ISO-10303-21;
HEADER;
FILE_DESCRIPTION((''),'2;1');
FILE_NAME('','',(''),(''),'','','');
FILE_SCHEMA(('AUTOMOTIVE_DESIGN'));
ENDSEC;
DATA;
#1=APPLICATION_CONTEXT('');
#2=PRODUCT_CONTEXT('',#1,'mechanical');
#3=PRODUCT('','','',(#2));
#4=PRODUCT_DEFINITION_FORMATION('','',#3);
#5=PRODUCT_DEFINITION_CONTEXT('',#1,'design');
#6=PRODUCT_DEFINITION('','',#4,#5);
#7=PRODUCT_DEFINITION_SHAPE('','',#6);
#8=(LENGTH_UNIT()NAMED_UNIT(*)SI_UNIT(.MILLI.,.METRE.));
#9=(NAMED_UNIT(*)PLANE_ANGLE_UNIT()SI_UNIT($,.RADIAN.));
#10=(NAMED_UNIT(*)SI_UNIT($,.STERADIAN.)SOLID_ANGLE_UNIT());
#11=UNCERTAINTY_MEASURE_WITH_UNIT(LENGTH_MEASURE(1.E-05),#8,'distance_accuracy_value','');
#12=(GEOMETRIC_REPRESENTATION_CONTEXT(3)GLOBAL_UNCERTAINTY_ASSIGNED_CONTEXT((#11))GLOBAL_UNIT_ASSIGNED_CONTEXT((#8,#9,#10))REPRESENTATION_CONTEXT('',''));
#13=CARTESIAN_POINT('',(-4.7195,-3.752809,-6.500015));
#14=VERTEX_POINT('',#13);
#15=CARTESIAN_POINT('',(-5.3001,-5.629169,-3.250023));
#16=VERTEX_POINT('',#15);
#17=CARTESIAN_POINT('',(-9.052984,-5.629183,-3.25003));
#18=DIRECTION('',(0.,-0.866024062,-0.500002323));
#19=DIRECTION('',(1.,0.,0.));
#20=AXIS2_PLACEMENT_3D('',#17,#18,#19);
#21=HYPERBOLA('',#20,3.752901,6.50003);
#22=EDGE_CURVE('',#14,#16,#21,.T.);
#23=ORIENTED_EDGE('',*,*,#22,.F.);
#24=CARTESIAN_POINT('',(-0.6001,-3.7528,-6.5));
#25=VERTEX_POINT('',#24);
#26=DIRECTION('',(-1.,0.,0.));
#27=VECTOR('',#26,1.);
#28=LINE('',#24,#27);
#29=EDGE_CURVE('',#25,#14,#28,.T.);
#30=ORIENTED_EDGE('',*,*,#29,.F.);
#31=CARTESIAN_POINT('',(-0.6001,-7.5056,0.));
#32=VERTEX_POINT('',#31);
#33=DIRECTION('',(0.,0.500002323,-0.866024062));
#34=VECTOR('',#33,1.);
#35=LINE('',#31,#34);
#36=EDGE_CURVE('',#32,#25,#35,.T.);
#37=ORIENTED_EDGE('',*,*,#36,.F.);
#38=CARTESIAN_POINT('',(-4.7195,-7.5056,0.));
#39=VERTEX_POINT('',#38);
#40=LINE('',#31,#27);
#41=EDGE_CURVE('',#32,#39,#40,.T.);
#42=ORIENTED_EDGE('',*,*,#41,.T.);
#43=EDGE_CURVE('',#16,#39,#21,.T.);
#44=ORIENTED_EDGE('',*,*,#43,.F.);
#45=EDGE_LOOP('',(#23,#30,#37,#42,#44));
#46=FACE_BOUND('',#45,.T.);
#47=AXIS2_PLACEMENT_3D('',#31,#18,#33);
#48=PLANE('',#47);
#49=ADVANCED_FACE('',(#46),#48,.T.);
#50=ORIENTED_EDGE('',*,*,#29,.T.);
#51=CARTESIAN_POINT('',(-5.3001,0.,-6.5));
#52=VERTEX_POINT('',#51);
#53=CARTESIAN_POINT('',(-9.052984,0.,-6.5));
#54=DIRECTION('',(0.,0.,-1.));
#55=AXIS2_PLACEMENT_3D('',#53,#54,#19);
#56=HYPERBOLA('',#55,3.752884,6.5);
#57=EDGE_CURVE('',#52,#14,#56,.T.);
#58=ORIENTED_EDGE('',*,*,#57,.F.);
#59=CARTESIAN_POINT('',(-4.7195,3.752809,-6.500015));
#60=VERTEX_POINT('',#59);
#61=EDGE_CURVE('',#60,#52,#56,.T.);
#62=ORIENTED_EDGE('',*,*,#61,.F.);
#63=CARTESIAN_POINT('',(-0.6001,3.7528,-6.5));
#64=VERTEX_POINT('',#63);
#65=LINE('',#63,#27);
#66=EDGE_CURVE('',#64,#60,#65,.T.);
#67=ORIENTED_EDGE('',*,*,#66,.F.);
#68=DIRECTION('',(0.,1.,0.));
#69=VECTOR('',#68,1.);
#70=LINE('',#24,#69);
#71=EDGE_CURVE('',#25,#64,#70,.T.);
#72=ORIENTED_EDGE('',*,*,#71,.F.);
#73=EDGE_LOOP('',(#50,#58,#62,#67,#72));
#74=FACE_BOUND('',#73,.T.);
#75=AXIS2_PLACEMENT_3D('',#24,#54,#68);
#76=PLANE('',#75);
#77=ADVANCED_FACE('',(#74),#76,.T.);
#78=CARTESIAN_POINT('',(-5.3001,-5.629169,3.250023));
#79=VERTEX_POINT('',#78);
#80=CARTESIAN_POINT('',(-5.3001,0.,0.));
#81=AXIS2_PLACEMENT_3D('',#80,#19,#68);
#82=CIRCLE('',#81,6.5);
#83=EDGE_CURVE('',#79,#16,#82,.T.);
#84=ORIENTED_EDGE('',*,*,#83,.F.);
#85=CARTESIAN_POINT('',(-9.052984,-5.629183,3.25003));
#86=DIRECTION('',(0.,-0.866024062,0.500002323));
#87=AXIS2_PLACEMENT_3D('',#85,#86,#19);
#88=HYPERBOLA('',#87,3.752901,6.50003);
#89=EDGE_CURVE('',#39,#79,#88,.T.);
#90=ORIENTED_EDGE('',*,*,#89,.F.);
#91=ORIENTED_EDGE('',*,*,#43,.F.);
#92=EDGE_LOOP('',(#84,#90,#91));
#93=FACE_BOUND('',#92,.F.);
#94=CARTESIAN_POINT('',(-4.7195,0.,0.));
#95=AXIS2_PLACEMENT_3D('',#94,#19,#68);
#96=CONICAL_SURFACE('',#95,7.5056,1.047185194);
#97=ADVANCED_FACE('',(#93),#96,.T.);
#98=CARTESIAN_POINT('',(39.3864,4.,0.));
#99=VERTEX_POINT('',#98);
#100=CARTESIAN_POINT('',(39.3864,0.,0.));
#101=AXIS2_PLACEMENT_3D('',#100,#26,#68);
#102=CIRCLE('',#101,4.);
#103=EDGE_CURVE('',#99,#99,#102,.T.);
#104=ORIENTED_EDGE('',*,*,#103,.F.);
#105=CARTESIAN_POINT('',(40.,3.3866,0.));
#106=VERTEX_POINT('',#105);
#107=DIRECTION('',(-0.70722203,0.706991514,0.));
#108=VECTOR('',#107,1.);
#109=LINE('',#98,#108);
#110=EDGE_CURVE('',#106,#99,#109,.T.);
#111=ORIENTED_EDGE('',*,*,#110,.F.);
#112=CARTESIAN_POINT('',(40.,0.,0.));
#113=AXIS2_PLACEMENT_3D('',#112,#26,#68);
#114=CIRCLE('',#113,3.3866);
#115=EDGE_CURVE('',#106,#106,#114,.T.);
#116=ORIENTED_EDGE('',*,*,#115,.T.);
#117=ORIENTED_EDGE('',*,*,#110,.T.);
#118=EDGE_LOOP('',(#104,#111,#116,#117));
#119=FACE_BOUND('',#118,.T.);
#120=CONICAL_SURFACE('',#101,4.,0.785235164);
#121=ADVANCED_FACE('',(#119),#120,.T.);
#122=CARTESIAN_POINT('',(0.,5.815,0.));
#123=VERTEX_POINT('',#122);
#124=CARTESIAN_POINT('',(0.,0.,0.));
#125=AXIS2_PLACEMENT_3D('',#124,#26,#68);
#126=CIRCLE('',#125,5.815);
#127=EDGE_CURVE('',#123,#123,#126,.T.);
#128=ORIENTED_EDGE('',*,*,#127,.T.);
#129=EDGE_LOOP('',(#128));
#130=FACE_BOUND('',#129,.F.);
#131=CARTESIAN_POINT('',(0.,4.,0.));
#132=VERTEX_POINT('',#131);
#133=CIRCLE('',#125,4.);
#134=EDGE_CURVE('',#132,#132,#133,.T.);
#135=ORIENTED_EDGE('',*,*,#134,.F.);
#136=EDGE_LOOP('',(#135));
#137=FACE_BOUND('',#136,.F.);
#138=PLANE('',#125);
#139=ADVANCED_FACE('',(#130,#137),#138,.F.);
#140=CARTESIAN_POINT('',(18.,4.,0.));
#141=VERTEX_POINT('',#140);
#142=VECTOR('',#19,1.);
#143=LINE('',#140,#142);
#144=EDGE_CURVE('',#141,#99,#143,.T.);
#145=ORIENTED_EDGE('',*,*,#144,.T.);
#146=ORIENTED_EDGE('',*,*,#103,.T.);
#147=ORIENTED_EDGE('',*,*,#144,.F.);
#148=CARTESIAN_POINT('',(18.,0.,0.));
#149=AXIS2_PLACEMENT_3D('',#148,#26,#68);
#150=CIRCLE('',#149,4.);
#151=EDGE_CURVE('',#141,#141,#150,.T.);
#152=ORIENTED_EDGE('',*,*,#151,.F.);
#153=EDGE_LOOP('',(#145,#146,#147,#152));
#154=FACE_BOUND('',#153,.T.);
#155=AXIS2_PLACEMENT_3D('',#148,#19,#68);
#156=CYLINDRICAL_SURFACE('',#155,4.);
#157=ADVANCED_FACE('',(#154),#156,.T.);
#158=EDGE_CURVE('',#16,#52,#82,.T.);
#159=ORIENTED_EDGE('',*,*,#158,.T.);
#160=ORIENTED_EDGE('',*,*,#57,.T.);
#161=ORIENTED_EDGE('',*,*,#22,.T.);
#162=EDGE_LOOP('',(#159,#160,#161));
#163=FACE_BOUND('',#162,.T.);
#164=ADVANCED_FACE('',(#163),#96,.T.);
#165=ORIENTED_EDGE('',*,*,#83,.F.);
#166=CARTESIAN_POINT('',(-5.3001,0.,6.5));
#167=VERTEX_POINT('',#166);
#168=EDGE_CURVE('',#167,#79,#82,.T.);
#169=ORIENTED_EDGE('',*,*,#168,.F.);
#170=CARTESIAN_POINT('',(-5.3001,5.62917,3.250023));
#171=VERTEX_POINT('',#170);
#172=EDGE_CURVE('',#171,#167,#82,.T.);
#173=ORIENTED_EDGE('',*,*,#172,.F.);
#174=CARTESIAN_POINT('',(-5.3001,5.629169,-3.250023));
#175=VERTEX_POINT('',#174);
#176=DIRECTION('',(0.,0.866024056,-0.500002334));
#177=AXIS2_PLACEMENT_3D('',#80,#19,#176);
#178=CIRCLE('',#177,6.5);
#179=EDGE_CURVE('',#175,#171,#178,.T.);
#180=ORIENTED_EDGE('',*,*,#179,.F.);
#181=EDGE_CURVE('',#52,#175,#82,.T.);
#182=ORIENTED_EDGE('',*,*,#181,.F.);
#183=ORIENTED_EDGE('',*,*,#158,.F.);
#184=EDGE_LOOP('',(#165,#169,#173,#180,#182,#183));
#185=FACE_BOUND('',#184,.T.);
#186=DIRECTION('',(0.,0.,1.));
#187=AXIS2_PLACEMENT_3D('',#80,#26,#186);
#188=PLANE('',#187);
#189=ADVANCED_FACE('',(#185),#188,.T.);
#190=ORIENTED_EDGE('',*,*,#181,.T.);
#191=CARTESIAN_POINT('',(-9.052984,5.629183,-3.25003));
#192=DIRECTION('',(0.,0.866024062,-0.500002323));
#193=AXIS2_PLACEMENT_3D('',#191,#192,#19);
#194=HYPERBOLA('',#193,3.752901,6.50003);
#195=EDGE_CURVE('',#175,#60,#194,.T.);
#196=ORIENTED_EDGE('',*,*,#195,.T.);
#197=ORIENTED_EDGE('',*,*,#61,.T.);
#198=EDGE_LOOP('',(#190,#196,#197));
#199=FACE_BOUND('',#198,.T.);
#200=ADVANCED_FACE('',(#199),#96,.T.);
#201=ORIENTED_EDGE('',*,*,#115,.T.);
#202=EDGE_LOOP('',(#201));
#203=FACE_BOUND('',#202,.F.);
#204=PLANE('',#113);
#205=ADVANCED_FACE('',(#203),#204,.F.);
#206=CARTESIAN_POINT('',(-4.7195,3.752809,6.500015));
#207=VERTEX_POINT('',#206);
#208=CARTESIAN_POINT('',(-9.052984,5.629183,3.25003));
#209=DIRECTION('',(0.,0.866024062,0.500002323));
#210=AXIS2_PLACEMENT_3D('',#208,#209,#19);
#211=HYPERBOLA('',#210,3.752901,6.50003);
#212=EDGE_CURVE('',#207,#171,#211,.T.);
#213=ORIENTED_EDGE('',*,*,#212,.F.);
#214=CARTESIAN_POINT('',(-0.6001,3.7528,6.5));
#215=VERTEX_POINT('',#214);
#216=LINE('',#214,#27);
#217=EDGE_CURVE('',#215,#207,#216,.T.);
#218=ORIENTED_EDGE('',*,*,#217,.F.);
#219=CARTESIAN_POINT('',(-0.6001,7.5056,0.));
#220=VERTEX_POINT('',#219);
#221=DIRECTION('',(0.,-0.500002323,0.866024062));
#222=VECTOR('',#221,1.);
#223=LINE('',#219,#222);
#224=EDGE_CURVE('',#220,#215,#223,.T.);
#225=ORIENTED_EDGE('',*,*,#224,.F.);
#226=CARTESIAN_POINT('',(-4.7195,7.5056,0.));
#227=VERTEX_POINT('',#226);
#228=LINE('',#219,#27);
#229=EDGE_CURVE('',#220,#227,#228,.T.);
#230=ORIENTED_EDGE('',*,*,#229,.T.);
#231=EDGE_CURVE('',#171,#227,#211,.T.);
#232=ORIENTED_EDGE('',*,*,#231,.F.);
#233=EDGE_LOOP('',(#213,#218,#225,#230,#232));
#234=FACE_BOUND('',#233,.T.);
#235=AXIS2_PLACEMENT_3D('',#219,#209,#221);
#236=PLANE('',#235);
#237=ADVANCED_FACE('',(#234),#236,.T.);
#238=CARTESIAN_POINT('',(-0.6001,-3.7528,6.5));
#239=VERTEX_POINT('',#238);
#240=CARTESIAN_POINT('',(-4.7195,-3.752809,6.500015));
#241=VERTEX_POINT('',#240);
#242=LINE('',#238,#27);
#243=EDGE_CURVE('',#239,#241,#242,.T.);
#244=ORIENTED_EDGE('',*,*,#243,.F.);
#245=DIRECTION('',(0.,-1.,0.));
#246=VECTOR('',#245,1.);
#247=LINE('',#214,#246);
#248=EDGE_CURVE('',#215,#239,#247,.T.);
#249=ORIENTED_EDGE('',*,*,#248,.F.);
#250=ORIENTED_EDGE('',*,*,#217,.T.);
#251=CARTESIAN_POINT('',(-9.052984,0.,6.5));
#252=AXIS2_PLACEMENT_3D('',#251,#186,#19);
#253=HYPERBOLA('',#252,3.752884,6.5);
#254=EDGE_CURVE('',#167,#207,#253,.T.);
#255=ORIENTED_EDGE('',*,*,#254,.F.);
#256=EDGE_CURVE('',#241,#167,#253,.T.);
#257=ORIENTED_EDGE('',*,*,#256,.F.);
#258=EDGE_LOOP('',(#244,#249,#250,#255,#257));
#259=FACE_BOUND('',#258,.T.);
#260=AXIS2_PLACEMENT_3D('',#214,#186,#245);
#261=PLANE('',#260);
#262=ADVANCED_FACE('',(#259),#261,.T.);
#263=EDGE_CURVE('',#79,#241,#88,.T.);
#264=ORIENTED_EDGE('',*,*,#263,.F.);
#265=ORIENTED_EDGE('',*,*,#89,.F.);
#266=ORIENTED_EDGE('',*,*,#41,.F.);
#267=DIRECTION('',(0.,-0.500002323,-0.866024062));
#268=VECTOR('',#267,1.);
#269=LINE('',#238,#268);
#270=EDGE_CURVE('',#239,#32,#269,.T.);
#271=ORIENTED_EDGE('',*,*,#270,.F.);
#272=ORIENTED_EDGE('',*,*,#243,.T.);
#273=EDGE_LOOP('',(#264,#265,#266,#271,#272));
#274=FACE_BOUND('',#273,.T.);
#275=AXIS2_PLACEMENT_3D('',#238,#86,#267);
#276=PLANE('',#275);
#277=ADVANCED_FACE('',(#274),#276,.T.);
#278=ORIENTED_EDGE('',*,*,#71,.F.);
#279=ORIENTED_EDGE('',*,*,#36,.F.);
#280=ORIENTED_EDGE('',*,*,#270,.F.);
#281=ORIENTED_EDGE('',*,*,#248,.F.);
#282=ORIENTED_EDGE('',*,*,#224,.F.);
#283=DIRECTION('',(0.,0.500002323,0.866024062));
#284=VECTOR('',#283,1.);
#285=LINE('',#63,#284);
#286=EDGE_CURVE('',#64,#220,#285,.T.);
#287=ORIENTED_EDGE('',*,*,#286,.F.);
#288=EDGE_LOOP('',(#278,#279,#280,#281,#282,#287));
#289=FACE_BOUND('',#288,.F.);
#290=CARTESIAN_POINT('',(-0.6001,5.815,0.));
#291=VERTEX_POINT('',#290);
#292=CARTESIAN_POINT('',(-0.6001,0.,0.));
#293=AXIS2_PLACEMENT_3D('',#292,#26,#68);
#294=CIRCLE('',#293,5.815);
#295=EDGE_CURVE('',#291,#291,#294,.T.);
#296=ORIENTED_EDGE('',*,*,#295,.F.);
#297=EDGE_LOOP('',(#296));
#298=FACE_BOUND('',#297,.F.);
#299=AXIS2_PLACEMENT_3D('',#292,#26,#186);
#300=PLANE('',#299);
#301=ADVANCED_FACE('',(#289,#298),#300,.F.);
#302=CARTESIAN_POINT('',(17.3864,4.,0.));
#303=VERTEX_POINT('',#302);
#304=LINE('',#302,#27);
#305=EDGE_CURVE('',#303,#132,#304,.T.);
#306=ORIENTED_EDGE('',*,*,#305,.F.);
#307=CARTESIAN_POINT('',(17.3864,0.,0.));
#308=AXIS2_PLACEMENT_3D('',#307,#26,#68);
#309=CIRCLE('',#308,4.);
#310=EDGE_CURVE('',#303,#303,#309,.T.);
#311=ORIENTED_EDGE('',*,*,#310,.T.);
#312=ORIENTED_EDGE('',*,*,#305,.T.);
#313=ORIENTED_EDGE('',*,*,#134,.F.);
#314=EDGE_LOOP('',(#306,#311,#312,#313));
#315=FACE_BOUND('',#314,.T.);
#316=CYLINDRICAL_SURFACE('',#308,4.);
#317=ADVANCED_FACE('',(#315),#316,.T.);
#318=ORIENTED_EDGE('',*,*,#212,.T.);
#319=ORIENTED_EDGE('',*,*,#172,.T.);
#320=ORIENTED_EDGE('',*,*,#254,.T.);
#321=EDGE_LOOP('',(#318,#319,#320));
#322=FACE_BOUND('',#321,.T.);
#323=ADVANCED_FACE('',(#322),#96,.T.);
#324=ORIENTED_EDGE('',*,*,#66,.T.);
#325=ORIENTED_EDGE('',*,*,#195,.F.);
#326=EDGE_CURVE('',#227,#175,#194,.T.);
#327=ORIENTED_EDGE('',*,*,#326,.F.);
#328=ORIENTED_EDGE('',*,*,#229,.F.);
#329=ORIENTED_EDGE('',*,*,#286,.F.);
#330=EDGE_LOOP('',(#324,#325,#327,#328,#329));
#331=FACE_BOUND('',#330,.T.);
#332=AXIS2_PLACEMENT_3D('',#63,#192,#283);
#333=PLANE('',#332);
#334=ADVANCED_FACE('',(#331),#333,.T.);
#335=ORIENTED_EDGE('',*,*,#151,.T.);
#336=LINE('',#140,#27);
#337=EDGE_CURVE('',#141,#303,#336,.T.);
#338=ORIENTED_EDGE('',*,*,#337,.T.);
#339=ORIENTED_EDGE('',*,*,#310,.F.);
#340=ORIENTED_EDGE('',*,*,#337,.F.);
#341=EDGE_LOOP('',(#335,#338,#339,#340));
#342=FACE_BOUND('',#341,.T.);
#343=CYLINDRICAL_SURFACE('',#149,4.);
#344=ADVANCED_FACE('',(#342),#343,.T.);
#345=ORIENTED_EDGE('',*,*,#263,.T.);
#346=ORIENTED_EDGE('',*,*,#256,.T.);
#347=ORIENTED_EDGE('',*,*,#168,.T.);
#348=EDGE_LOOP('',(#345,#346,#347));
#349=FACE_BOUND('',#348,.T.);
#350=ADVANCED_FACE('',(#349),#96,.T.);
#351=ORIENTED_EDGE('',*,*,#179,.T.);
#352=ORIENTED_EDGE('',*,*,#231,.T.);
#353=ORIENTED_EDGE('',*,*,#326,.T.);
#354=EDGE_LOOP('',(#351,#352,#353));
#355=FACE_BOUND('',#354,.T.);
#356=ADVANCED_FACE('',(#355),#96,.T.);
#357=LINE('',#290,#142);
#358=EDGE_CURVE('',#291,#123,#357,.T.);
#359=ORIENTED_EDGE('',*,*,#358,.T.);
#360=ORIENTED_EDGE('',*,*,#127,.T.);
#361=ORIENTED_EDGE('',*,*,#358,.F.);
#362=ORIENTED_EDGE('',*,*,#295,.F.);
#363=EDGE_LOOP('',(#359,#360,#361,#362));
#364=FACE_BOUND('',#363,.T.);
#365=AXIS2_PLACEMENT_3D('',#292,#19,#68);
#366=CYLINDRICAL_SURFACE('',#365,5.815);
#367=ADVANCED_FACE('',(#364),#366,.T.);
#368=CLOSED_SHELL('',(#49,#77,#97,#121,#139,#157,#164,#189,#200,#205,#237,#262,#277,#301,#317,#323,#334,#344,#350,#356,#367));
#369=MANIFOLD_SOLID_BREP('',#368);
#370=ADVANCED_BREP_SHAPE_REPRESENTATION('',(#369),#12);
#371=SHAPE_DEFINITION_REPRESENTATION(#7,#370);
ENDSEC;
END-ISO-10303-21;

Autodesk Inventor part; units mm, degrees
ref_plane "YZ Plane" through (0, 0, 0) normal (1, 0, 0) x (0, 1, 0)
ref_plane "XZ Plane" through (0, 0, 0) normal (0, 1, 0) x (-1, 0, 0)
sketch "Sketch1" plane through (0, 0, 0) normal (0, 0, 1) x (1, 0, 0)
  line L0 (0, 5.815) -> (0, 4)
  line L1 (18, 4) -> (40, 4)
  line L2 (40, 4) -> (40, 0)
  line L3 (40, 0) -> (-0.6001, 0)
  line L4 (-8.7201, 0) -> (48.12, 0) projected
  line L5 (-0.6001, 0) -> (-0.6001, 5.815)
  line L6 (-0.6001, 5.815) -> (0, 5.815)
  line L7 (18, 4) -> (17.3864, 4)
  line L8 (17.3864, 4) -> (0, 4)
  line L9 (0, -1.163) -> (0, 6.978) projected
  dimension "d0" = 40
  dimension "d1" = 22
  dimension "d2" = 8
  dimension "d9" = 0.6001
  dimension "d10" = 11.63
  dimension "d13" = 0.6136
  dimension "d14" = 8
revolve "Body" add sketch "Sketch1" angle 360 about axis through (40, 0, 0) along (-1, 0, 0)
sketch "Sketch2" plane through (-0.6001, 0, 0) normal (-1, 0, 0) x (0, 0, 1)
  line L0 (0, 7.5056) -> (6.5, 3.7528)
  line L1 (6.5, 3.7528) -> (6.5, -3.7528)
  line L2 (6.5, -3.7528) -> (0, -7.5056)
  line L3 (0, -7.5056) -> (-6.5, -3.7528)
  line L4 (-6.5, -3.7528) -> (-6.5, 3.7528)
  line L5 (-6.5, 3.7528) -> (0, 7.5056)
  point P0 (0, 0)
  point P1 (0, 0)
  dimension "d11" = 13
extrude "Head" add sketch "Sketch2" along normal blind 4.7
sketch "Sketch4" plane through (0, 0, 0) normal (0, 0, 1) x (1, 0, 0)
  line L0 (-5.3001, 6.5) -> (-5.3001, 7.5056)
  line L1 (-5.3001, 7.5056) -> (-4.7195, 7.5056)
  line L2 (-4.7195, 7.5056) -> (-5.3001, 6.5)
  line L3 (-6.2401, 0) -> (0.3399, 0) projected
  line L4 (-0.6001, 7.5056) -> (-5.3001, 7.5056) projected
  line L5 (-5.3001, 3.7528) -> (-5.3001, 7.5056) projected
  dimension "d5" = 30
  dimension "d19" = 13
revolve "Chamfer1" cut sketch "Sketch4" angle 360 about axis through (-10, 0, 0) along (1, 0, 0)
thread "Thread" size "M8x1" class "6g" standard "ISO Metric profile" length 22
chamfer "Chamfer2" distance 0.6134 distance2 0.6136 1 edges at (40, -4, 0) measured on face at (40, 0.4453, 1.0204)
ref_plane "Work Plane1" through (1.525, 0, 0) normal (0, 0, 1) x (1, 0, 0)
equation "\"d0\" = NLG"
equation "\"d1\" = GEL"
equation "\"d2\" = GD"
equation "\"d10\" = SD2"
equation "\"d14\" = BDM"
equation "\"d11\" = SW"
equation "\"d3\" = KOH - SD"
equation "\"d5\" = ANG1"
equation "\"d19\" = SW0"
equation "\"d15\" = GEL"
equation "\"d6\" = -0.5 * SPD + 0.5 * GD"
equation "\"NLG\" = 40"
equation "\"GD\" = NND"
equation "\"BDM\" = NND"
equation "\"KOH\" = 5.3"
equation "\"GEL\" = 22"
equation "\"SW\" = 13"
equation "\"SW0\" = SW"
equation "\"SPD\" = NND - 1.2269 * PTC"
equation "\"SD2\" = 11.63"
equation "\"SD\" = 0.6"
equation "\"ANG1\" = 30deg"
equation "\"GAL\" = 0.61345 * PTC"
equation "\"GUL\" = 0.61345 * PTC"
equation "\"RR\" = 0.4"
equation "\"GD1\" = THREADDIA - 1.2269 * PTC"
equation "\"THREADDIA\" = 8"
equation "\"SDH\" = SD2"
equation "\"TOA\" = 30deg"
equation "\"PTC\" = 1"
equation "\"NND\" = 8"
equation "\"E0\" = 1.155 * SW"
properties part number "ISO 8765 - M8 x 1 x 40" material "Stainless Steel, 440C"
